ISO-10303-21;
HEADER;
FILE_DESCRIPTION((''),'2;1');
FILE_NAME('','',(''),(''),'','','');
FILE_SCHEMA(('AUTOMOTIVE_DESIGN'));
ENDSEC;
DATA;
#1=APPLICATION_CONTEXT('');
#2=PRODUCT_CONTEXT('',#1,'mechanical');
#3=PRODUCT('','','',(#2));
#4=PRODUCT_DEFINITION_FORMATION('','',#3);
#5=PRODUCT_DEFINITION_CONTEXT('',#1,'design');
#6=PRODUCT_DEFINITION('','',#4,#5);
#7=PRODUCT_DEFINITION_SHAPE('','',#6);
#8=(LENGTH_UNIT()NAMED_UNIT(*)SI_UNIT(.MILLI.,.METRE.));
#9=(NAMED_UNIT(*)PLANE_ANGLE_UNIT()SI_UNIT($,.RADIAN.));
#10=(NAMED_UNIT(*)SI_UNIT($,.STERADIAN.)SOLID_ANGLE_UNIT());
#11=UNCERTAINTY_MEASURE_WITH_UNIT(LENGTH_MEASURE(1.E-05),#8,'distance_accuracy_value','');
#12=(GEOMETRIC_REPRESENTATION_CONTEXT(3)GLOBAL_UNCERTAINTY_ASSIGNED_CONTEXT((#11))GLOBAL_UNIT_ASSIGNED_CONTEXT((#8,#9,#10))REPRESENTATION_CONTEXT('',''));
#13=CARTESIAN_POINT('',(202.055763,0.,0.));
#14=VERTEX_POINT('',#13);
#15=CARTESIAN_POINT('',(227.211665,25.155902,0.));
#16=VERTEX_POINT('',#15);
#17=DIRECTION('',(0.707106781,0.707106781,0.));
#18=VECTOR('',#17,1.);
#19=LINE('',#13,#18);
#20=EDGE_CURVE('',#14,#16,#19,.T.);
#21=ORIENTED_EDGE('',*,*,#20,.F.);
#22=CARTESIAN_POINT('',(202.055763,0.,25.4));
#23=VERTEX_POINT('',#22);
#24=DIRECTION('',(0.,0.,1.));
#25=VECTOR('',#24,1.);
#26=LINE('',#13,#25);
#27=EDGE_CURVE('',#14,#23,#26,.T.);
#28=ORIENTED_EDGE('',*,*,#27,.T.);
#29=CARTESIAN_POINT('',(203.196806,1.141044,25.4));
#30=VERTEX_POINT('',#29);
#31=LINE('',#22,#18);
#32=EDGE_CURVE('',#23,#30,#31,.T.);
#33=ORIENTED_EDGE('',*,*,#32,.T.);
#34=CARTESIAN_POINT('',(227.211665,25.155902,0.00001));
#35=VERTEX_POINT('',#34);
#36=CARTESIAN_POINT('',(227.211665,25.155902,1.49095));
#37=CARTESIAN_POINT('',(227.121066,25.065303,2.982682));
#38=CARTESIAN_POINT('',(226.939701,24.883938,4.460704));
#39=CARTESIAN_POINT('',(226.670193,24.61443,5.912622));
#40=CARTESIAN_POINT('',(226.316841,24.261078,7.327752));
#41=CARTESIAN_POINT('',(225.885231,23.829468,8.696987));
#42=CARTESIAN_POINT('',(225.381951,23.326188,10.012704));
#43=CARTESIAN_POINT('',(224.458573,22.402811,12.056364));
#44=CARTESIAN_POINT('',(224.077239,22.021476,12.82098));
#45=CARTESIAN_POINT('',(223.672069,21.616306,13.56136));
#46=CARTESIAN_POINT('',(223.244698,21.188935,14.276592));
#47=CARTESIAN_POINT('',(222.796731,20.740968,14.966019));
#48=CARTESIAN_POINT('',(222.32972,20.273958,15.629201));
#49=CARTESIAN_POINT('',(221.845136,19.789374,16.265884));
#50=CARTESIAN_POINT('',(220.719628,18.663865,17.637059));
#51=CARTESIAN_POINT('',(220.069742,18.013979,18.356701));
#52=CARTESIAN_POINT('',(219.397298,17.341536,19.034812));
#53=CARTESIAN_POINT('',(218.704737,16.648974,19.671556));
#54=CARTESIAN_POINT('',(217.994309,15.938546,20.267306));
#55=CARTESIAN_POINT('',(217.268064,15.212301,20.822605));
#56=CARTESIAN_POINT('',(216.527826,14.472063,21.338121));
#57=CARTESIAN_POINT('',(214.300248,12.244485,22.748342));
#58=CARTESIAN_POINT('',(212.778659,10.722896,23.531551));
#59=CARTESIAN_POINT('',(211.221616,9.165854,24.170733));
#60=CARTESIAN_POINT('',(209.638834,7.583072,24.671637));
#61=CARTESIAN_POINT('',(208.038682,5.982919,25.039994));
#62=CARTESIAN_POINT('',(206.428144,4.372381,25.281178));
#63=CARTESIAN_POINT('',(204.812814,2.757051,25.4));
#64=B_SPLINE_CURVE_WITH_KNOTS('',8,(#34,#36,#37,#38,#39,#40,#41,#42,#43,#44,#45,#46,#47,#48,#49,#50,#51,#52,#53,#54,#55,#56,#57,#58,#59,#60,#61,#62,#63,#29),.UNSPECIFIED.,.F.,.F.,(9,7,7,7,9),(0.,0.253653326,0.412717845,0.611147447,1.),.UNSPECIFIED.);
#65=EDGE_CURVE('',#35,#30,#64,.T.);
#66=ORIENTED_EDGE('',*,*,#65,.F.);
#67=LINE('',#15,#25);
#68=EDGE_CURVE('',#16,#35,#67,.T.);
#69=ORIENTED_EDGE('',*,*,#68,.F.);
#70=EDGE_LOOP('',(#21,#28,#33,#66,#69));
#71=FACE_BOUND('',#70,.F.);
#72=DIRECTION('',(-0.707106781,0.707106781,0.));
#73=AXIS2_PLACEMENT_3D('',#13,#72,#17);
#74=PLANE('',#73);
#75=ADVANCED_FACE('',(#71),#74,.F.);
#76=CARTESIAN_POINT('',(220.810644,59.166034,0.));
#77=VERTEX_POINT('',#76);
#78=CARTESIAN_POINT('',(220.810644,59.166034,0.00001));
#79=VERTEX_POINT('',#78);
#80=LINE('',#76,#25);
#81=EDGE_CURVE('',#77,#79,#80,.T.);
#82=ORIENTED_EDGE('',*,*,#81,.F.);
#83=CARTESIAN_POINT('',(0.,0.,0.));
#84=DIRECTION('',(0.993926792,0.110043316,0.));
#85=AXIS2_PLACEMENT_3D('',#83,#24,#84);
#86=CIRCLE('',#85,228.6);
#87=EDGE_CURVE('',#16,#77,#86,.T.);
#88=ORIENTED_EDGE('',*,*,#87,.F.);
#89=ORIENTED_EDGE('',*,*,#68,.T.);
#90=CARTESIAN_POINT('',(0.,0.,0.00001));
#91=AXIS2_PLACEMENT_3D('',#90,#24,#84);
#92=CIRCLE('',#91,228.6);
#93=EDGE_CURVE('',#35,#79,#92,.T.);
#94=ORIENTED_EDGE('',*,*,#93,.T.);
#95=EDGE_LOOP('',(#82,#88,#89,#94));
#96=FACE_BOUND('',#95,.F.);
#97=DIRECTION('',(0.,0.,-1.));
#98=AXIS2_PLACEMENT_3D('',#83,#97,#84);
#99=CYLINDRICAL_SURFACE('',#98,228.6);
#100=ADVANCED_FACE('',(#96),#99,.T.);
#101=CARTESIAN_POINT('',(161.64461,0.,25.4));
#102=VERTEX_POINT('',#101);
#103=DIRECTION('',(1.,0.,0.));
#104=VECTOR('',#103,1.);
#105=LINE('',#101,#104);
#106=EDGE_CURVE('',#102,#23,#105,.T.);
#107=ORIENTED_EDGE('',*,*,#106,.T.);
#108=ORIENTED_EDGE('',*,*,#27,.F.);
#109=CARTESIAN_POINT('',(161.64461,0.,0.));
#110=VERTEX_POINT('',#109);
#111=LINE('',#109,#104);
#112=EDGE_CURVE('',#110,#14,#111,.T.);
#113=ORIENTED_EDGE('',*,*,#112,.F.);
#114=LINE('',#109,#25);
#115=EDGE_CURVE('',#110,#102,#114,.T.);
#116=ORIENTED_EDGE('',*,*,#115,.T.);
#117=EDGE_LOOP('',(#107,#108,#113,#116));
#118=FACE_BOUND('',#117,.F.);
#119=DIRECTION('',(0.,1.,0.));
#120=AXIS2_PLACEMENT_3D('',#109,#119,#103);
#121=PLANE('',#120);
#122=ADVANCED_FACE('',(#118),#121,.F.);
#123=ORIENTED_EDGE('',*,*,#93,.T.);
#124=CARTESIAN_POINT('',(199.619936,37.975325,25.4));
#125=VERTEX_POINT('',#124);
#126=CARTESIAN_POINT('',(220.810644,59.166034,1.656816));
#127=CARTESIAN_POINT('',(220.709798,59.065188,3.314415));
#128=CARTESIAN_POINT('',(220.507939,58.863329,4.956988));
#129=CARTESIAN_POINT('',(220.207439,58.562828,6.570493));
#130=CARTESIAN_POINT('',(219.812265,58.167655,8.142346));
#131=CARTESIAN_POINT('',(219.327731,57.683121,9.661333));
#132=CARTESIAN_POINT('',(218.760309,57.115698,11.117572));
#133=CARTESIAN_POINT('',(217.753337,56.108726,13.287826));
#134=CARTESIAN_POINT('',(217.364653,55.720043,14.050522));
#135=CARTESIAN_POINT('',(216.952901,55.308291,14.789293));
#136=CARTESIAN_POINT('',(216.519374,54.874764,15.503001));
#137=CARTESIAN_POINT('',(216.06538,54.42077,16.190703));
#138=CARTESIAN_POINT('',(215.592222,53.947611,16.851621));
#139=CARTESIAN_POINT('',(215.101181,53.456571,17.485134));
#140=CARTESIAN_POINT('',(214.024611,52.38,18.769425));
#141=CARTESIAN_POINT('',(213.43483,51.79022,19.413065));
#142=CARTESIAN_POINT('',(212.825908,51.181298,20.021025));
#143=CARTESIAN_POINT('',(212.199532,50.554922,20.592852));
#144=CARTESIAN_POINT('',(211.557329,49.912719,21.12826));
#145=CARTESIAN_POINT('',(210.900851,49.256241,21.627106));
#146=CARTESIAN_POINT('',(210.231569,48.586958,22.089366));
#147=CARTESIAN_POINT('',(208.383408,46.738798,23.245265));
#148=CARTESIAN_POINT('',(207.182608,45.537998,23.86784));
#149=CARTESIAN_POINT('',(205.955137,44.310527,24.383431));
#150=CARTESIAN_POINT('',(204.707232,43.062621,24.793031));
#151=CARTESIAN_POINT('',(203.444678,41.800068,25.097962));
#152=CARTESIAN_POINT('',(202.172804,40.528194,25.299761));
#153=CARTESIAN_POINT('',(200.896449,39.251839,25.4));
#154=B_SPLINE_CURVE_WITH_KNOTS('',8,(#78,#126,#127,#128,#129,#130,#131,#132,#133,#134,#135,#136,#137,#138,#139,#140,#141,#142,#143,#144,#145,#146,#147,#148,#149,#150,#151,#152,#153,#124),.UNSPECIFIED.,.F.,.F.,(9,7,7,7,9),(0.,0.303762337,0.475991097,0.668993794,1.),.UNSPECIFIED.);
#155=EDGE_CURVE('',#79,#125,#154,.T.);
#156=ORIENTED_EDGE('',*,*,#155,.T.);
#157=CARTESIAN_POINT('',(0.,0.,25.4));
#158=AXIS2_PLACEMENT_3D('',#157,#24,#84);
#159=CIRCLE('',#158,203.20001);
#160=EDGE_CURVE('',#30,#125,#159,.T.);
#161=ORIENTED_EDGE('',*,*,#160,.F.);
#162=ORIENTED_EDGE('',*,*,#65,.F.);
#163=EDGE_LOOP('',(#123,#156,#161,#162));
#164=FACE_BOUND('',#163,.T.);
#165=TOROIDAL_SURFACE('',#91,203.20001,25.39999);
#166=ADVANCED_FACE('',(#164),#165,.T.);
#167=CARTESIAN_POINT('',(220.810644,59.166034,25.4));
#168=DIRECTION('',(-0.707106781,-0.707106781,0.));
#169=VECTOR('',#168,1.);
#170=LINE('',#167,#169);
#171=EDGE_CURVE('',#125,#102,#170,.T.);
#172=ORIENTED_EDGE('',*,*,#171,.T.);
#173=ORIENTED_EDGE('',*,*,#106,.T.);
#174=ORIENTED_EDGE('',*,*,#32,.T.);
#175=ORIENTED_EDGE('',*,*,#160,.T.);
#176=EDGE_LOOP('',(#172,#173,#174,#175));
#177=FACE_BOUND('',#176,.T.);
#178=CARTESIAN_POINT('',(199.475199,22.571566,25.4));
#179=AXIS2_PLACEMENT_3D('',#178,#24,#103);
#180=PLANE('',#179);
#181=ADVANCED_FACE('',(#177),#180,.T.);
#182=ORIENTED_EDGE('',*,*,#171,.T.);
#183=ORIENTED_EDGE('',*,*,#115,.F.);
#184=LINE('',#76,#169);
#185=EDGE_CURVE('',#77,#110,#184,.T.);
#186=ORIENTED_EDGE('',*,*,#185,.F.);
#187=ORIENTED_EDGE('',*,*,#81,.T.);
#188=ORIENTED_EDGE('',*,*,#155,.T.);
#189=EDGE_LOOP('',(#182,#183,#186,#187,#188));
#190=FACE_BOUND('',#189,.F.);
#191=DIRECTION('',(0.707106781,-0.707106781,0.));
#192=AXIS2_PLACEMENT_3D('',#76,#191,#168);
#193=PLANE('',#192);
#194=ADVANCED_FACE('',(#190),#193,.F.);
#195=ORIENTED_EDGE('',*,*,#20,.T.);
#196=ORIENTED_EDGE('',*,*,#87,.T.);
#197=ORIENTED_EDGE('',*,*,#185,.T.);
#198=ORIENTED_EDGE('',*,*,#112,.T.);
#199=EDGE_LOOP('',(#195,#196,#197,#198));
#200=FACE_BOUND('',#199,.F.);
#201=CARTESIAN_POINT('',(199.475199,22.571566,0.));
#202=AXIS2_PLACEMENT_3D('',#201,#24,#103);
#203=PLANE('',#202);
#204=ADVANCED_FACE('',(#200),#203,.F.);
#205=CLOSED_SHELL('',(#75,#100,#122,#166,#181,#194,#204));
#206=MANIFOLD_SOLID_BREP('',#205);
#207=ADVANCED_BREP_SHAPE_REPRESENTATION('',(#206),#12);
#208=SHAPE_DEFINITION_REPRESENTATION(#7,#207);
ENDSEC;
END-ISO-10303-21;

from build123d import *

# Parameters (mm, degrees)
F2_DEPTH = 25.4
F3_R     = 25.39999


# Not quite as in the source:
# - a fillet or chamfer is up to 0.001 mm smaller than in the source, because OpenCascade refuses the exact size


with BuildPart() as f2:
    # F1 (on face) → F2 (new body)
    with BuildSketch(Plane.XY):
        with BuildLine():
            Line((161.6446101792, 0), (202.0557627241, 0))
            Line((202.0557627241, 0), (227.2116647397, 25.1559020156))
            ThreePointArc((227.2116647397, 25.1559020156), (224.6556687953, 42.28227144), (220.8106438897, 59.1660337104))
            Line((220.8106438897, 59.1660337104), (161.6446101792, 0))
        make_face()
    extrude(amount=F2_DEPTH)

    # F3 (radius 25.4 in the source; OpenCascade refuses exactly that, so slightly less here)
    f3_edges = [f2.edges().sort_by_distance(p)[0] for p in [
        (224.655669, 42.282271, 25.4),
    ]]
    fillet(f3_edges, radius=F3_R)


solid = f2.part
